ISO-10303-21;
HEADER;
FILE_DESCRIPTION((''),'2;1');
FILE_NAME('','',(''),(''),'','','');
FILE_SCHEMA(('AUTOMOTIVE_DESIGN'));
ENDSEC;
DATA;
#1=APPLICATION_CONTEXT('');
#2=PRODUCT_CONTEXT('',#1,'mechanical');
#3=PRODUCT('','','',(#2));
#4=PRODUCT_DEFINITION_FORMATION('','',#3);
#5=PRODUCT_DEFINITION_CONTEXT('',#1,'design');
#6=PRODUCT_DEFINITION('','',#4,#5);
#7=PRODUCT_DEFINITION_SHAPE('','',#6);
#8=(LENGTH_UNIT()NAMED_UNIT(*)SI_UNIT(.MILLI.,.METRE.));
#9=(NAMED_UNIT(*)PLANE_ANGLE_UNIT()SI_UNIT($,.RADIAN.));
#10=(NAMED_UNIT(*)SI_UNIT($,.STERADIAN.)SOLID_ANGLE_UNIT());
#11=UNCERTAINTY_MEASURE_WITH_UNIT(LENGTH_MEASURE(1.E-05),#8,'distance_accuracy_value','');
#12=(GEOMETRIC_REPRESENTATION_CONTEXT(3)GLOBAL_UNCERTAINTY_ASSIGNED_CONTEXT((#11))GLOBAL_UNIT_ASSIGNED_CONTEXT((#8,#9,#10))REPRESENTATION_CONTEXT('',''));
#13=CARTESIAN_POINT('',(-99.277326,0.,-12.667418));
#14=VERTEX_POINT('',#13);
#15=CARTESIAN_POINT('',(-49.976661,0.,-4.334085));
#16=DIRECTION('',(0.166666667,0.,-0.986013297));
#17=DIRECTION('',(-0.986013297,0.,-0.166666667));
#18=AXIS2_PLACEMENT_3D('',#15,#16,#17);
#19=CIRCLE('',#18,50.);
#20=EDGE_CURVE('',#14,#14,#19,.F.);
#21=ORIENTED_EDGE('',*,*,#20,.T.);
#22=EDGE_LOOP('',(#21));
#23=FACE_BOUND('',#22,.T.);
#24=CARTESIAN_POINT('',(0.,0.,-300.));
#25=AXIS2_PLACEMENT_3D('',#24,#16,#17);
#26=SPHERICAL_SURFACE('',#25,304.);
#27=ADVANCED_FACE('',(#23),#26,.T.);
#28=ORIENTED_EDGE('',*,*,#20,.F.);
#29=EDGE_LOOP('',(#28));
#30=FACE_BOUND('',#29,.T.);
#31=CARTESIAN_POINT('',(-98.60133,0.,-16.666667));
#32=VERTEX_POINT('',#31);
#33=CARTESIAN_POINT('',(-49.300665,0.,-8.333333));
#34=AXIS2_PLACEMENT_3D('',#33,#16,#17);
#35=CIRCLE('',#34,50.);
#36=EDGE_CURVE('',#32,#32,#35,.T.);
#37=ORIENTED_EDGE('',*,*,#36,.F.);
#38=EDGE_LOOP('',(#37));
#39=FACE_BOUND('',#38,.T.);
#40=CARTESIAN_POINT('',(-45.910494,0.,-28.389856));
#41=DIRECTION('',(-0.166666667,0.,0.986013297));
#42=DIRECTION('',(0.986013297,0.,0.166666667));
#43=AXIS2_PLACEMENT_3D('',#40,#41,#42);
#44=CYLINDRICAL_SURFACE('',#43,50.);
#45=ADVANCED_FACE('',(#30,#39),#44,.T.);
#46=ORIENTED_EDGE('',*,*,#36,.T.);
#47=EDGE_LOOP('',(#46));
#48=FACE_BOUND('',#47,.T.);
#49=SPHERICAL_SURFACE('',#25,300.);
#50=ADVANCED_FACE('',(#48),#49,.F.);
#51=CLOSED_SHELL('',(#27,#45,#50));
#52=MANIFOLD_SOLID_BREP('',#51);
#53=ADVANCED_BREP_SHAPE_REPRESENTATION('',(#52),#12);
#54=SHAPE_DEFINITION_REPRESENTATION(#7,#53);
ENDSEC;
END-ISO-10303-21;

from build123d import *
from build123d.topology import SkipClean

# Parameters (mm, degrees)
SKETCH4_W          = 136.14923221
SKETCH4_H          = 136.469884352
SKETCH4_R          = 50
CUT_EXTRUDE2_DEPTH = 115.679222781


with BuildPart() as part:
    # Sweep2: sweep along a path in Sketch2
    with BuildLine(Plane(origin=(0, 0, 0), x_dir=(1, 0, 0), z_dir=(0, 1, 0))) as sweep2_path:
        ThreePointArc((-98.601329718, 16.666666667), (-50, 4.196010845), (0, 0))
    # Sketch1 → Sweep2 (sweep)
    with BuildSketch(Plane(origin=(0, 0, 0), x_dir=(0, 0, -1), z_dir=(1, 0, 0))):
        with BuildLine():
            Line((4.196010845, 50), (0.140032682, 50))
            ThreePointArc((0.140032682, 50), (-4, 0), (0.140032682, -50))
            Line((0.140032682, -50), (4.196010845, -50))
            ThreePointArc((4.196010845, -50), (0, 0), (4.196010845, 50))
        make_face()
    sweep(path=sweep2_path.line)

    # Sketch4 → Cut-Extrude2 (cut, through all)
    with SkipClean():  # the faces are left unmerged after this step: merging them gives an invalid solid
        with BuildSketch(Plane(origin=(-0.811930682, 0, 8.175030791), x_dir=(0.9860132971832695, 0, 0.1666666666666664), z_dir=(-0.1666666666666664, 0, 0.9860132971832695))):
            with Locations((-53.775894029, -1.672479888)):
                Rectangle(SKETCH4_W, SKETCH4_H)
            with Locations((-50.561930682, 0)):
                Circle(SKETCH4_R, mode=Mode.SUBTRACT)
        extrude(amount=-CUT_EXTRUDE2_DEPTH, mode=Mode.SUBTRACT)


solid = part.part
